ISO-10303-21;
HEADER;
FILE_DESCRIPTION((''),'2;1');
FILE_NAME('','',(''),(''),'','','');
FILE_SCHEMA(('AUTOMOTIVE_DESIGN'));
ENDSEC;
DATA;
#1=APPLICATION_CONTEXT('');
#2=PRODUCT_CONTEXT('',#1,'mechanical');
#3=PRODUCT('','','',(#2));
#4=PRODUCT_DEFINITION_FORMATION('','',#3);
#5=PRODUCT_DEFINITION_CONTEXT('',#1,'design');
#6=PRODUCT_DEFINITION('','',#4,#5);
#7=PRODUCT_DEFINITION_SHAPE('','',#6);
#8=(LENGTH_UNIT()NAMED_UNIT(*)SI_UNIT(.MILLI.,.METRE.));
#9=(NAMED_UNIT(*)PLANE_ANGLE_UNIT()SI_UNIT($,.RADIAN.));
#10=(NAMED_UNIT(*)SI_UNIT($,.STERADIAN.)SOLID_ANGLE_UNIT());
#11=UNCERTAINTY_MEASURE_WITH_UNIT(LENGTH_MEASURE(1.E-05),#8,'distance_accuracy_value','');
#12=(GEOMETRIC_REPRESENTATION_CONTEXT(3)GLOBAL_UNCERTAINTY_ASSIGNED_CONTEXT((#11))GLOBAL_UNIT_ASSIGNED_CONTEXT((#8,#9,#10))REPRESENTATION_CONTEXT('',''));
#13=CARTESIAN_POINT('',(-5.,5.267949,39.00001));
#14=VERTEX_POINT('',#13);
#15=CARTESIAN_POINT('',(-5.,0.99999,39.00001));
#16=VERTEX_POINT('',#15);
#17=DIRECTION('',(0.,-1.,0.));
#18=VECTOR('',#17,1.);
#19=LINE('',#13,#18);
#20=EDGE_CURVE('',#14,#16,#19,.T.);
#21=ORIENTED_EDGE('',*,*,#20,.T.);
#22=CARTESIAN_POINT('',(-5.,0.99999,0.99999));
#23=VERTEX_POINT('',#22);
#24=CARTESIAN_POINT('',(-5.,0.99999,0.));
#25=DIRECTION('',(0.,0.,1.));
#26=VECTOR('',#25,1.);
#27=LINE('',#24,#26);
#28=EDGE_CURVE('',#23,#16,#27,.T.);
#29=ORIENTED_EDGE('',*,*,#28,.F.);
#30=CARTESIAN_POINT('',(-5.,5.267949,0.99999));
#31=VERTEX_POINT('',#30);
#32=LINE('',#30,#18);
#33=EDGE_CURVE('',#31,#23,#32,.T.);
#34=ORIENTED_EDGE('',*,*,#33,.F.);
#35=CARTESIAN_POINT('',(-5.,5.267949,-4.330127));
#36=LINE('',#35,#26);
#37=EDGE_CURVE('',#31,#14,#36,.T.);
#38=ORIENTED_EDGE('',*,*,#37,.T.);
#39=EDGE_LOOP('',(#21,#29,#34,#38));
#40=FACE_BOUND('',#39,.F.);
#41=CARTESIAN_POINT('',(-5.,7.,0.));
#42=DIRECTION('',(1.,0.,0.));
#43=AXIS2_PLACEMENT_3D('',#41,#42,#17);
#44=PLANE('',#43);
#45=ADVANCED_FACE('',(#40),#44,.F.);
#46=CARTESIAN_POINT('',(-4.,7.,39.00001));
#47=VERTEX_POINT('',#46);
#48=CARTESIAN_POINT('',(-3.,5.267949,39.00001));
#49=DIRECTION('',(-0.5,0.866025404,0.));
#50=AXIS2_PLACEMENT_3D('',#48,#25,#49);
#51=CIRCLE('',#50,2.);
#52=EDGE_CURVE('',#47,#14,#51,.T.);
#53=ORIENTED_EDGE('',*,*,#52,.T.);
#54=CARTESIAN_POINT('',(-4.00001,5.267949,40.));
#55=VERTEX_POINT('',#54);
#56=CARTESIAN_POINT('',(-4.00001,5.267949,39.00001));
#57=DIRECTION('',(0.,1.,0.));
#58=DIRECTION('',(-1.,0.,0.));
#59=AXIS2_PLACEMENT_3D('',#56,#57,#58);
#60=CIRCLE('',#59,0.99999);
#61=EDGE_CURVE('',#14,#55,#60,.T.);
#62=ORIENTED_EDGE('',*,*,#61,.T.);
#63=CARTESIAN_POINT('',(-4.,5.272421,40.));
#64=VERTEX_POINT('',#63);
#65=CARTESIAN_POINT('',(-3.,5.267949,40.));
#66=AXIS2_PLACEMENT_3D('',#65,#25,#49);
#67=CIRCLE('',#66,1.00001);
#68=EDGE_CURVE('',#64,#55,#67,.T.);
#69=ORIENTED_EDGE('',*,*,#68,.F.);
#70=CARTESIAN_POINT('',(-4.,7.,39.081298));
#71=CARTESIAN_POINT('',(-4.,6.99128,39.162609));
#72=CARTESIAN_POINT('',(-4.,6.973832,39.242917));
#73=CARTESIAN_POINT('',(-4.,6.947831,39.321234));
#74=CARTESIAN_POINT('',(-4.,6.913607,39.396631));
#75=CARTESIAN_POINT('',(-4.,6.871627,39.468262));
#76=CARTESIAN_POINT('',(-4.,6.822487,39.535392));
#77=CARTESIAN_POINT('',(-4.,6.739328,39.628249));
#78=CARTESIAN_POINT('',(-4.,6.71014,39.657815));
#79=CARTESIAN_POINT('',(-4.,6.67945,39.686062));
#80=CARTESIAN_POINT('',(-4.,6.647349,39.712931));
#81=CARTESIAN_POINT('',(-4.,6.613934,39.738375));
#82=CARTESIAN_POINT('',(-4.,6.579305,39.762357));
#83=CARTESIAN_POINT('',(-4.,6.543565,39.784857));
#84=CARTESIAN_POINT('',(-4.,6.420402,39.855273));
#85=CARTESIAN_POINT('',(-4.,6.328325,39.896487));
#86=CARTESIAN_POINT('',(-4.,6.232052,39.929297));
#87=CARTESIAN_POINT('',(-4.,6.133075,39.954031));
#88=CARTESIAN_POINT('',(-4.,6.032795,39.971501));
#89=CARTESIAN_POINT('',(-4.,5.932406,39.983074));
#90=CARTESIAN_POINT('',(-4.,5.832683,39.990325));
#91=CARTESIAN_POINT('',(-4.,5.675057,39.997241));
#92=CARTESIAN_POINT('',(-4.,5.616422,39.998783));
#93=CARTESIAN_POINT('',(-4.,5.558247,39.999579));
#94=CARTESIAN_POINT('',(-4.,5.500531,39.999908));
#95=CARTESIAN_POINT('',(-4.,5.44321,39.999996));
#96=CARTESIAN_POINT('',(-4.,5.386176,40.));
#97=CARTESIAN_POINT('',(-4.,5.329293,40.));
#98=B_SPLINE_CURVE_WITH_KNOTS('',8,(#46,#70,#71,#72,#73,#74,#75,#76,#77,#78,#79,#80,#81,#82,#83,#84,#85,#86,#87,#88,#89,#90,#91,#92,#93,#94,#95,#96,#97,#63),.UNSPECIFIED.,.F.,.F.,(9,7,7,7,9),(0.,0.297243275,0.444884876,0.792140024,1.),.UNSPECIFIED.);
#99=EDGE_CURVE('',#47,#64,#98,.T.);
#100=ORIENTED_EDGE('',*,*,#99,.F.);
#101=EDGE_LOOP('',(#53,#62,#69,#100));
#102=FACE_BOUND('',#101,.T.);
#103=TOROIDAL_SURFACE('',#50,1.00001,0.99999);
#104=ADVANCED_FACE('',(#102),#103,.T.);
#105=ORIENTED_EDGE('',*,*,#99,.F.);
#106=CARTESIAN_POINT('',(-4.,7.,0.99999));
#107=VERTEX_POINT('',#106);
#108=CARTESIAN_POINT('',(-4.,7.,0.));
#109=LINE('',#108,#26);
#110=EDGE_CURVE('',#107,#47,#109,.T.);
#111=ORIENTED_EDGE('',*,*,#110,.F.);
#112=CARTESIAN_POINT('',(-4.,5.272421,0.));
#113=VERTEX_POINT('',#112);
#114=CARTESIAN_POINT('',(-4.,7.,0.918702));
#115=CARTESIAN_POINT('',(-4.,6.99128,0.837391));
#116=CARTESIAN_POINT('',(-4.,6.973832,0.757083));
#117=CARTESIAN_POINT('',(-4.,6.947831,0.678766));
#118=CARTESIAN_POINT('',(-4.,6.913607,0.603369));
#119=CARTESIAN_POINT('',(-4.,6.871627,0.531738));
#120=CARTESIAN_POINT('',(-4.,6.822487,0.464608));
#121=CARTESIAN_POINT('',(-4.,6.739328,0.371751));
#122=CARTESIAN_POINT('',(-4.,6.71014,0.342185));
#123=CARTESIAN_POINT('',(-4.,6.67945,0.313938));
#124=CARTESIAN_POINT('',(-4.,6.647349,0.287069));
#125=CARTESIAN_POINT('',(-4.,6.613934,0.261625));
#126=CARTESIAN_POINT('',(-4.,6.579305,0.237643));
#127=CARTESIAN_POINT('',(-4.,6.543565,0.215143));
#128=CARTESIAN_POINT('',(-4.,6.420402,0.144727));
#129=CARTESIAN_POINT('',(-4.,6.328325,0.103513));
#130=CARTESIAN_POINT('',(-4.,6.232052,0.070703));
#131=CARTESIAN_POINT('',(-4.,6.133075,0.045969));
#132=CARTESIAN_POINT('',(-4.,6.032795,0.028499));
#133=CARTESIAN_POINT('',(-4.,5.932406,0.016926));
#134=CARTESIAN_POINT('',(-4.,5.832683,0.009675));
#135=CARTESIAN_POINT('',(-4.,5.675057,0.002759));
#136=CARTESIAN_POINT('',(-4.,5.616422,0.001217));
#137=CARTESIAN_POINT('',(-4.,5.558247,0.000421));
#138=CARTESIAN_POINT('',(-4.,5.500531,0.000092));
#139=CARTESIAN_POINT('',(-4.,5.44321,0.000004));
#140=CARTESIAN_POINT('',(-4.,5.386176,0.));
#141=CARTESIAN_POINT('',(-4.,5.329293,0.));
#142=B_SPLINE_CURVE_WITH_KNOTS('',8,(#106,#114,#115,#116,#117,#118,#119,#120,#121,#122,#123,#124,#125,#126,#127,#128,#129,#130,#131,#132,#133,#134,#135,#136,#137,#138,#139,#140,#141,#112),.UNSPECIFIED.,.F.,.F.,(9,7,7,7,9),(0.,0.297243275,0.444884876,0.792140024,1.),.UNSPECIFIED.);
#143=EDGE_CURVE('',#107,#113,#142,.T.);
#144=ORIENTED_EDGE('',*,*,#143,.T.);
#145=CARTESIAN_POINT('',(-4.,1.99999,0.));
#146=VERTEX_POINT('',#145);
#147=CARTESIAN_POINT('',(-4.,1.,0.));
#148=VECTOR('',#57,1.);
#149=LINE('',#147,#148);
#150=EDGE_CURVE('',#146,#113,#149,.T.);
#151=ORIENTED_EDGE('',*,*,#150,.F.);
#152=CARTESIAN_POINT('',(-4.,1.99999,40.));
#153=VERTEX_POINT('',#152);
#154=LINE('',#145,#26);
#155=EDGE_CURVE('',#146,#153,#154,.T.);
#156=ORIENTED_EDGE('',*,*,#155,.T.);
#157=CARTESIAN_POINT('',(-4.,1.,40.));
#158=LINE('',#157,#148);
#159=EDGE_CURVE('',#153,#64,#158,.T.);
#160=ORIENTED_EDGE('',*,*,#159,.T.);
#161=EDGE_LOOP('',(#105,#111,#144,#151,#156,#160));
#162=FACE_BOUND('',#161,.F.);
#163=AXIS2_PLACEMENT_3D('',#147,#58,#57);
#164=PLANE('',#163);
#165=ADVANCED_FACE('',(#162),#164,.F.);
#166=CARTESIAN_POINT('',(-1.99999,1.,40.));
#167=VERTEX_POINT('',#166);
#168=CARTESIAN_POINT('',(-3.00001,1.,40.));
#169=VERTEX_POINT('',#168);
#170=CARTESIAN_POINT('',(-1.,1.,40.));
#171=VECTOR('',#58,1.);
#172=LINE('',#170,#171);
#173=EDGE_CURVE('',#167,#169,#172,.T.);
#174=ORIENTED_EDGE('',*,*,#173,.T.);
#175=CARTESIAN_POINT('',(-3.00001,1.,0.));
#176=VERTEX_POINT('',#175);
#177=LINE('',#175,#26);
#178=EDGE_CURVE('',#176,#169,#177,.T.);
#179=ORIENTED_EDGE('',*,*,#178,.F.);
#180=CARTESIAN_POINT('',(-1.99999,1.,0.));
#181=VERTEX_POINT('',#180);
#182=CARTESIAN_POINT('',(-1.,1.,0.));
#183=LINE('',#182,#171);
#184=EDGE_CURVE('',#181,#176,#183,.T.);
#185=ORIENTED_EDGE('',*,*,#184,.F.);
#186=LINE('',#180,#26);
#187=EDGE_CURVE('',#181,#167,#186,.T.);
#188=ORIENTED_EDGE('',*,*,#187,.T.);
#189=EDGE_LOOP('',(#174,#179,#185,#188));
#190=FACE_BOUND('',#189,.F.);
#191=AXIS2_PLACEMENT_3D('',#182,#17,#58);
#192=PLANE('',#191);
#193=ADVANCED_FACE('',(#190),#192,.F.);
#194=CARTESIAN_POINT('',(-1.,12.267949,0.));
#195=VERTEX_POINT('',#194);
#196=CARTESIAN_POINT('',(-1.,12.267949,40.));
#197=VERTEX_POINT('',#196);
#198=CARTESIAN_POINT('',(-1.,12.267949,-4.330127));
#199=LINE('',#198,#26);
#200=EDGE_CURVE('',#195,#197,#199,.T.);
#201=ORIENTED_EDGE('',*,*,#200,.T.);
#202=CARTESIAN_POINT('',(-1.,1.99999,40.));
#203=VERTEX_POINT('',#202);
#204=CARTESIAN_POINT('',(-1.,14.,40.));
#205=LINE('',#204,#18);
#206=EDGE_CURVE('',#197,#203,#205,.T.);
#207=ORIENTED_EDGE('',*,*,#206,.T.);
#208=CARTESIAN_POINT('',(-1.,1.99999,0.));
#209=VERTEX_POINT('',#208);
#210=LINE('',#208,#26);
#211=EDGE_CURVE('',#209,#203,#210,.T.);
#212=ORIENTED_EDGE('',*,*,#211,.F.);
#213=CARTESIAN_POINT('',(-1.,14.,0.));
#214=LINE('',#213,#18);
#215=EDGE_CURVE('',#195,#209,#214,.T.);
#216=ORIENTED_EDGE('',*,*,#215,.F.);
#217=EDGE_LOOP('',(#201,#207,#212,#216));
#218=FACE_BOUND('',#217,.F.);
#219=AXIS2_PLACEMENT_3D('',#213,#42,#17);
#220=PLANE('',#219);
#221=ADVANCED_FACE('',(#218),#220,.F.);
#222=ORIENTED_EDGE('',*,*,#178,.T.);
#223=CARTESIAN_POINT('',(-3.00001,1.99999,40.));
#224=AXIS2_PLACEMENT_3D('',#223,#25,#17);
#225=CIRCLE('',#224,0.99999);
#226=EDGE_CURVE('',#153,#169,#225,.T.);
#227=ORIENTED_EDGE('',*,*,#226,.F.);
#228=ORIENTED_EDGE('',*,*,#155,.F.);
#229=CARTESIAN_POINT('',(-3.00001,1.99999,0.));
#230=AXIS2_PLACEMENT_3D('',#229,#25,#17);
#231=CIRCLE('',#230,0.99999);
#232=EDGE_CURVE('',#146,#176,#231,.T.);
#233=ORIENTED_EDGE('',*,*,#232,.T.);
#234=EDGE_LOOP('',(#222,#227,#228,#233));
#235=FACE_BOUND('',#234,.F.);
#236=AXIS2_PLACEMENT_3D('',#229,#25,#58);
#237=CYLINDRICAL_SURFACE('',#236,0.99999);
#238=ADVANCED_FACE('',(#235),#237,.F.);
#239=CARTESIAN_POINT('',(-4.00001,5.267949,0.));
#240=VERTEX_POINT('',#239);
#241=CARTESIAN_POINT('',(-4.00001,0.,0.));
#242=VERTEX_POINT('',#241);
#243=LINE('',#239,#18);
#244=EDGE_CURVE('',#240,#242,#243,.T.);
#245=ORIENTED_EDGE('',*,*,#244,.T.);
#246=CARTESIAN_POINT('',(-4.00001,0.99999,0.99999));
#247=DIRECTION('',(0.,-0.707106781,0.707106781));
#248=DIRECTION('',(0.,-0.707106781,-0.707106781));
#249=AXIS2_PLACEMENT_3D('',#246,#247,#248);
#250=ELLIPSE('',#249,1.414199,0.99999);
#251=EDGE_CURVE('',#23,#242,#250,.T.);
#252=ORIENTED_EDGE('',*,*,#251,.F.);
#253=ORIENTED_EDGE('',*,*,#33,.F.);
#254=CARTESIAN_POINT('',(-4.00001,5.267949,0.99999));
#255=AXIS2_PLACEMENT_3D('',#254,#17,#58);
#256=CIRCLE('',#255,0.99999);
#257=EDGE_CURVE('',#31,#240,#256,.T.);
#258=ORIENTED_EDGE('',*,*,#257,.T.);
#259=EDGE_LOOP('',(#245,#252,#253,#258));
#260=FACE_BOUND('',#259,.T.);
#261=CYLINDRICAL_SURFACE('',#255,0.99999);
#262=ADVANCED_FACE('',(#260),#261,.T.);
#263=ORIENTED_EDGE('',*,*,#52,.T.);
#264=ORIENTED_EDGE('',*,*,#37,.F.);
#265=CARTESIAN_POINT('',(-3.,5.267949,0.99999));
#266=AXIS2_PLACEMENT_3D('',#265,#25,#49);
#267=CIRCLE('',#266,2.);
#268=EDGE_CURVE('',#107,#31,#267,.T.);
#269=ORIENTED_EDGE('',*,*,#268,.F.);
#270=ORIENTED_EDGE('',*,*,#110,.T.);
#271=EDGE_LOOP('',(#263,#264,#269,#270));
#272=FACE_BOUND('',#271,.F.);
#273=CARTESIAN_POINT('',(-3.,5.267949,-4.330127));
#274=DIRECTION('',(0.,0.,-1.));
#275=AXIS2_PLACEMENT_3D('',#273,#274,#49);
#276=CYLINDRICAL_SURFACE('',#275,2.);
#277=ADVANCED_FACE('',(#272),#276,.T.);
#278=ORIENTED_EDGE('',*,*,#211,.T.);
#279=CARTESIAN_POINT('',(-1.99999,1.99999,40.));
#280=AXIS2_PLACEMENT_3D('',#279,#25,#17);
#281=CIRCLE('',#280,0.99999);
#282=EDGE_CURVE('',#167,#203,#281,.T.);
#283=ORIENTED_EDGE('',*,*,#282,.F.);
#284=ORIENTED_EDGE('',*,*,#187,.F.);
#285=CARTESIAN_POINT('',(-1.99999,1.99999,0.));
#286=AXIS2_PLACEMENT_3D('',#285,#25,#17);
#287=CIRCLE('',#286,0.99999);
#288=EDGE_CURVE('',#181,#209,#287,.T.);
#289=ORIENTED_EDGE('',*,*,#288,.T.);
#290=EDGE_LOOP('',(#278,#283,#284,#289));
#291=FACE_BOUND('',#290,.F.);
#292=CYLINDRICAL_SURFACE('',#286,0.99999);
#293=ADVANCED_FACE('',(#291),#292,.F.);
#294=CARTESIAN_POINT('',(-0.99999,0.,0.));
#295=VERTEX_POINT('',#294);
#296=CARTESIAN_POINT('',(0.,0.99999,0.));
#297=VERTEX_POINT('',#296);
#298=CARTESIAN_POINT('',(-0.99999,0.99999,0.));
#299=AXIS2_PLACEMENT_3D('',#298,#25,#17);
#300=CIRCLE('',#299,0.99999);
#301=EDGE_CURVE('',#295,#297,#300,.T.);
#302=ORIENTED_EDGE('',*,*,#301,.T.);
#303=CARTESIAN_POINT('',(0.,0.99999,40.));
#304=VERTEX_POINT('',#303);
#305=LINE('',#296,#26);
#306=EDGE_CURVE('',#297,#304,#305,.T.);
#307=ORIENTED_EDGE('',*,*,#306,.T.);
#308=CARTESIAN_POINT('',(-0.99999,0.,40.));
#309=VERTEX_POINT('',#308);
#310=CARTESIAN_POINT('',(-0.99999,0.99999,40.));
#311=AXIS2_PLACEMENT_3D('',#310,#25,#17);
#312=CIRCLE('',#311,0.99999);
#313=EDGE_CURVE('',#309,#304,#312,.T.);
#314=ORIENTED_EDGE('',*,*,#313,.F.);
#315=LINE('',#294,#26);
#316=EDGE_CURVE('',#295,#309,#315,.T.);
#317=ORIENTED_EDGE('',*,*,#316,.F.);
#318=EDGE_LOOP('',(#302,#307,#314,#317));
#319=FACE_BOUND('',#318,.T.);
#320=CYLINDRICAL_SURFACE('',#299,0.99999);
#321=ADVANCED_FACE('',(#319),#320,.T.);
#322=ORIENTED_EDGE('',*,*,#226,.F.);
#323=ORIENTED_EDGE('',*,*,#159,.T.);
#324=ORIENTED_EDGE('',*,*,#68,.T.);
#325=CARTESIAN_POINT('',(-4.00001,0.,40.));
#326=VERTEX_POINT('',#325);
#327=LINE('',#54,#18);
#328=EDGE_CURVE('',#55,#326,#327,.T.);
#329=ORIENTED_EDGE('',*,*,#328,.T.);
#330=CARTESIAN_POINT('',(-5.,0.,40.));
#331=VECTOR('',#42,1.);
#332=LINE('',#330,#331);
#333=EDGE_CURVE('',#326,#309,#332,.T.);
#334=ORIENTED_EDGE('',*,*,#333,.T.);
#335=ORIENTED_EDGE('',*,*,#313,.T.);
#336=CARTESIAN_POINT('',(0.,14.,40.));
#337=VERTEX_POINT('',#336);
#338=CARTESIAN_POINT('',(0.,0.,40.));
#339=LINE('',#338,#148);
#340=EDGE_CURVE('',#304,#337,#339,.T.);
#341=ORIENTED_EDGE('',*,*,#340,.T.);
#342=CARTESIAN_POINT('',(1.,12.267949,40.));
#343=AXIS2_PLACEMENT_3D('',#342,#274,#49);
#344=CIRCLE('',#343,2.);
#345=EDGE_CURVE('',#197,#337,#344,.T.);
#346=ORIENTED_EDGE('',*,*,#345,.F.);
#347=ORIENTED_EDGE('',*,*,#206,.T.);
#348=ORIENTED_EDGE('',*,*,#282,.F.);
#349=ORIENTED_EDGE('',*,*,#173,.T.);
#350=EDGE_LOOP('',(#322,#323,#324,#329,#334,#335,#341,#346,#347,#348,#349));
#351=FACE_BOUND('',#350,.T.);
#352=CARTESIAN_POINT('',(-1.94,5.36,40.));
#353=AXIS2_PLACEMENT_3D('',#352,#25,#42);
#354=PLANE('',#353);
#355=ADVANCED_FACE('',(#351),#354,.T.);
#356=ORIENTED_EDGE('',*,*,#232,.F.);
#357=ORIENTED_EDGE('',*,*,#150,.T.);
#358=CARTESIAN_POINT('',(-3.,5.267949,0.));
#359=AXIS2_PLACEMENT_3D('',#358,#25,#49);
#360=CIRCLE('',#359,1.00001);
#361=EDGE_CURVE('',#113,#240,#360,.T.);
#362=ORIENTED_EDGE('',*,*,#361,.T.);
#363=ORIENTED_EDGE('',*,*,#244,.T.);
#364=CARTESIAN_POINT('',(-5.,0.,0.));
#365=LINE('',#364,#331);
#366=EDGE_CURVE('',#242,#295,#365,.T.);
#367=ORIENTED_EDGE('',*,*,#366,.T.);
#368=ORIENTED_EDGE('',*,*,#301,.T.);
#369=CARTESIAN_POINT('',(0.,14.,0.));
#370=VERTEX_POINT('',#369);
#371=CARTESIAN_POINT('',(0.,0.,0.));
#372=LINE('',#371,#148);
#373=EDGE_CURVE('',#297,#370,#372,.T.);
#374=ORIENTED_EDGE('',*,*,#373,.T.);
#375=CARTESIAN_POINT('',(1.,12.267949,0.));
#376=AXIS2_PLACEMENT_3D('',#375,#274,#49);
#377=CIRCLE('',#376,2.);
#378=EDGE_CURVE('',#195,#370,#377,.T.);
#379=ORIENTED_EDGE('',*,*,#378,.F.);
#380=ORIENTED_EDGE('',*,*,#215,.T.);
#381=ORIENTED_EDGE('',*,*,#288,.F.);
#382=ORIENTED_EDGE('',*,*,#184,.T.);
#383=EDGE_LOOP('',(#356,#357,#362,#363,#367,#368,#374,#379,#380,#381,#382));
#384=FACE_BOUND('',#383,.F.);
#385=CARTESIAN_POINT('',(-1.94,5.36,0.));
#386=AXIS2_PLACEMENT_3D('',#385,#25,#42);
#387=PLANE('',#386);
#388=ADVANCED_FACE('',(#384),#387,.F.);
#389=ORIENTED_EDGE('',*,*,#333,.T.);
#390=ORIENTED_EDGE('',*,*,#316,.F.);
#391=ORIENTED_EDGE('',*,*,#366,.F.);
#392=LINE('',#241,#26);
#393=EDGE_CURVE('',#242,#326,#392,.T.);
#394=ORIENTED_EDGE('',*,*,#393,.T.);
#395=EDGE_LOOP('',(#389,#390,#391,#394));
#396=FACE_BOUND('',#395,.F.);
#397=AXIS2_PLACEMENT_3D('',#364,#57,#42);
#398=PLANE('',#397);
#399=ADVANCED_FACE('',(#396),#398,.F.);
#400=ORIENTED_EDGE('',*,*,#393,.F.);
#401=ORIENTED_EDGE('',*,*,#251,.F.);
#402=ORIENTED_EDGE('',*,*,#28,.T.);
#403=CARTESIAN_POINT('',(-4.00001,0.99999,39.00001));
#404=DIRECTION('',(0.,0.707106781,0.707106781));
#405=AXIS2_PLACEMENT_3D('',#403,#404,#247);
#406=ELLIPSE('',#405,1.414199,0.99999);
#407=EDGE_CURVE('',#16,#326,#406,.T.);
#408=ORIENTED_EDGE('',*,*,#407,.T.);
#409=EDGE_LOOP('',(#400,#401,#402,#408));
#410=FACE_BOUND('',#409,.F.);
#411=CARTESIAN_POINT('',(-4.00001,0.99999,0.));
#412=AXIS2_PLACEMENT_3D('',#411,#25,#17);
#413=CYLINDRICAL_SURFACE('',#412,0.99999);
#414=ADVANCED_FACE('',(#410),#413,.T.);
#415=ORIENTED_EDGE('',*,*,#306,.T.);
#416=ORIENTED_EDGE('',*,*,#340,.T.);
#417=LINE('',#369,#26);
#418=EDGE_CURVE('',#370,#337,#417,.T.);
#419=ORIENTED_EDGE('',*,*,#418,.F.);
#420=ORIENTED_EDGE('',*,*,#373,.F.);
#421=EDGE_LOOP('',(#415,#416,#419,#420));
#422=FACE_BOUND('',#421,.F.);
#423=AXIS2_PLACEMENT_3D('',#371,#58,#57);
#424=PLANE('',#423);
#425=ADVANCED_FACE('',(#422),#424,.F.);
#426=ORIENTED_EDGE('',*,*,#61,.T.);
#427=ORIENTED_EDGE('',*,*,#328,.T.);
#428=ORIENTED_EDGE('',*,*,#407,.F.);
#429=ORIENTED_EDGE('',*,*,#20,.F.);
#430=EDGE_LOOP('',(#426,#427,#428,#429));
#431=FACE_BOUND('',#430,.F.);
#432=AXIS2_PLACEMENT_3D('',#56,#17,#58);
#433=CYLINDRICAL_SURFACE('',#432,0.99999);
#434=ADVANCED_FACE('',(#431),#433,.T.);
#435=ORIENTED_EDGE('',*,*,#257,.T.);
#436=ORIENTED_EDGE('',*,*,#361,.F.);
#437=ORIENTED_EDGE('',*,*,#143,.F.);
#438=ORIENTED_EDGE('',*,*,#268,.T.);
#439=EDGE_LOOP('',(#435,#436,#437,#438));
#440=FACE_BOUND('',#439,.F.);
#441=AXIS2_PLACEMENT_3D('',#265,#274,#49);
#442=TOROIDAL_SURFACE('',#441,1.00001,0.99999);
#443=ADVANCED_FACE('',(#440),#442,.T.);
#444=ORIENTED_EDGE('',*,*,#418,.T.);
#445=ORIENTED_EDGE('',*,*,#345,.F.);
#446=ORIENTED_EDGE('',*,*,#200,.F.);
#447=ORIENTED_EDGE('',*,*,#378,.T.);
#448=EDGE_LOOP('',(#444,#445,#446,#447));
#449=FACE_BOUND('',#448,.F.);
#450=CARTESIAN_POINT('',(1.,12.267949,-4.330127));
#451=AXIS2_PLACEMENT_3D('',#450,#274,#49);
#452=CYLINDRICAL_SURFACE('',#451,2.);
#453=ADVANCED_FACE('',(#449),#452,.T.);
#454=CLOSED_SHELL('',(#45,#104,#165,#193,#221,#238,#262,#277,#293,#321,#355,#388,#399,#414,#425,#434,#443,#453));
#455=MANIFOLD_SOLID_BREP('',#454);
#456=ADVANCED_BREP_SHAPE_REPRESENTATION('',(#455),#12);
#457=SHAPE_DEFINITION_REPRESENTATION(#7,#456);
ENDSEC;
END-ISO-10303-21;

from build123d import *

# Parameters (mm, degrees)
F1_DEPTH    = 40
F2_T1_DEPTH = 48.6602540378
F3_R        = 0.99999


# Not quite as in the source:
# - a fillet or chamfer that OpenCascade refuses, or shapes differently, is made with other operations: its cross-section is extruded or revolved along the edge and cut away or added
# - a fillet or chamfer is up to 0.001 mm smaller than in the source, because OpenCascade refuses the exact size


with BuildPart() as f1:
    # F0 (on Top) → F1 (new body)
    with BuildSketch(Plane.XY):
        Polygon((-5, 0), (0, 0), (0, 14), (-1, 14), (-1, 1), (-4, 1), (-4, 7), (-5, 7), align=None)
    extrude(amount=F1_DEPTH)

    # F2: fillet of radius 2 on 2 edges, made by hand

    # F2_s2 → F2_t1 (cut)
    with BuildSketch(Plane.XY.offset(-4.3301270189)):
        with BuildLine():
            ThreePointArc((-4, 7), (-4.7320508076, 6.2679491924), (-5, 5.2679491924))
            Line((-5, 5.2679491924), (-5, 7))
            Line((-5, 7), (-4, 7))
        make_face()
        with BuildLine():
            ThreePointArc((0, 14), (-0.7320508076, 13.2679491924), (-1, 12.2679491924))
            Line((-1, 12.2679491924), (-1, 14))
            Line((-1, 14), (0, 14))
        make_face()
    extrude(amount=F2_T1_DEPTH, mode=Mode.SUBTRACT)

    # F3 (radius 1 in the source; OpenCascade refuses exactly that, so slightly less here)
    f3_edges = [f1.edges().sort_by_distance(p)[0] for p in [
        (-5, 2.633975, 40),
        (-5, 2.633975, 0),
        (-5, 0, 20),
        (0, 0, 20),
        (-4, 1, 20),
        (-1, 1, 20),
        (-4.732051, 6.267949, 0),
        (-4.732051, 6.267949, 40),
    ]]
    fillet(f3_edges, radius=F3_R)


solid = f1.part
